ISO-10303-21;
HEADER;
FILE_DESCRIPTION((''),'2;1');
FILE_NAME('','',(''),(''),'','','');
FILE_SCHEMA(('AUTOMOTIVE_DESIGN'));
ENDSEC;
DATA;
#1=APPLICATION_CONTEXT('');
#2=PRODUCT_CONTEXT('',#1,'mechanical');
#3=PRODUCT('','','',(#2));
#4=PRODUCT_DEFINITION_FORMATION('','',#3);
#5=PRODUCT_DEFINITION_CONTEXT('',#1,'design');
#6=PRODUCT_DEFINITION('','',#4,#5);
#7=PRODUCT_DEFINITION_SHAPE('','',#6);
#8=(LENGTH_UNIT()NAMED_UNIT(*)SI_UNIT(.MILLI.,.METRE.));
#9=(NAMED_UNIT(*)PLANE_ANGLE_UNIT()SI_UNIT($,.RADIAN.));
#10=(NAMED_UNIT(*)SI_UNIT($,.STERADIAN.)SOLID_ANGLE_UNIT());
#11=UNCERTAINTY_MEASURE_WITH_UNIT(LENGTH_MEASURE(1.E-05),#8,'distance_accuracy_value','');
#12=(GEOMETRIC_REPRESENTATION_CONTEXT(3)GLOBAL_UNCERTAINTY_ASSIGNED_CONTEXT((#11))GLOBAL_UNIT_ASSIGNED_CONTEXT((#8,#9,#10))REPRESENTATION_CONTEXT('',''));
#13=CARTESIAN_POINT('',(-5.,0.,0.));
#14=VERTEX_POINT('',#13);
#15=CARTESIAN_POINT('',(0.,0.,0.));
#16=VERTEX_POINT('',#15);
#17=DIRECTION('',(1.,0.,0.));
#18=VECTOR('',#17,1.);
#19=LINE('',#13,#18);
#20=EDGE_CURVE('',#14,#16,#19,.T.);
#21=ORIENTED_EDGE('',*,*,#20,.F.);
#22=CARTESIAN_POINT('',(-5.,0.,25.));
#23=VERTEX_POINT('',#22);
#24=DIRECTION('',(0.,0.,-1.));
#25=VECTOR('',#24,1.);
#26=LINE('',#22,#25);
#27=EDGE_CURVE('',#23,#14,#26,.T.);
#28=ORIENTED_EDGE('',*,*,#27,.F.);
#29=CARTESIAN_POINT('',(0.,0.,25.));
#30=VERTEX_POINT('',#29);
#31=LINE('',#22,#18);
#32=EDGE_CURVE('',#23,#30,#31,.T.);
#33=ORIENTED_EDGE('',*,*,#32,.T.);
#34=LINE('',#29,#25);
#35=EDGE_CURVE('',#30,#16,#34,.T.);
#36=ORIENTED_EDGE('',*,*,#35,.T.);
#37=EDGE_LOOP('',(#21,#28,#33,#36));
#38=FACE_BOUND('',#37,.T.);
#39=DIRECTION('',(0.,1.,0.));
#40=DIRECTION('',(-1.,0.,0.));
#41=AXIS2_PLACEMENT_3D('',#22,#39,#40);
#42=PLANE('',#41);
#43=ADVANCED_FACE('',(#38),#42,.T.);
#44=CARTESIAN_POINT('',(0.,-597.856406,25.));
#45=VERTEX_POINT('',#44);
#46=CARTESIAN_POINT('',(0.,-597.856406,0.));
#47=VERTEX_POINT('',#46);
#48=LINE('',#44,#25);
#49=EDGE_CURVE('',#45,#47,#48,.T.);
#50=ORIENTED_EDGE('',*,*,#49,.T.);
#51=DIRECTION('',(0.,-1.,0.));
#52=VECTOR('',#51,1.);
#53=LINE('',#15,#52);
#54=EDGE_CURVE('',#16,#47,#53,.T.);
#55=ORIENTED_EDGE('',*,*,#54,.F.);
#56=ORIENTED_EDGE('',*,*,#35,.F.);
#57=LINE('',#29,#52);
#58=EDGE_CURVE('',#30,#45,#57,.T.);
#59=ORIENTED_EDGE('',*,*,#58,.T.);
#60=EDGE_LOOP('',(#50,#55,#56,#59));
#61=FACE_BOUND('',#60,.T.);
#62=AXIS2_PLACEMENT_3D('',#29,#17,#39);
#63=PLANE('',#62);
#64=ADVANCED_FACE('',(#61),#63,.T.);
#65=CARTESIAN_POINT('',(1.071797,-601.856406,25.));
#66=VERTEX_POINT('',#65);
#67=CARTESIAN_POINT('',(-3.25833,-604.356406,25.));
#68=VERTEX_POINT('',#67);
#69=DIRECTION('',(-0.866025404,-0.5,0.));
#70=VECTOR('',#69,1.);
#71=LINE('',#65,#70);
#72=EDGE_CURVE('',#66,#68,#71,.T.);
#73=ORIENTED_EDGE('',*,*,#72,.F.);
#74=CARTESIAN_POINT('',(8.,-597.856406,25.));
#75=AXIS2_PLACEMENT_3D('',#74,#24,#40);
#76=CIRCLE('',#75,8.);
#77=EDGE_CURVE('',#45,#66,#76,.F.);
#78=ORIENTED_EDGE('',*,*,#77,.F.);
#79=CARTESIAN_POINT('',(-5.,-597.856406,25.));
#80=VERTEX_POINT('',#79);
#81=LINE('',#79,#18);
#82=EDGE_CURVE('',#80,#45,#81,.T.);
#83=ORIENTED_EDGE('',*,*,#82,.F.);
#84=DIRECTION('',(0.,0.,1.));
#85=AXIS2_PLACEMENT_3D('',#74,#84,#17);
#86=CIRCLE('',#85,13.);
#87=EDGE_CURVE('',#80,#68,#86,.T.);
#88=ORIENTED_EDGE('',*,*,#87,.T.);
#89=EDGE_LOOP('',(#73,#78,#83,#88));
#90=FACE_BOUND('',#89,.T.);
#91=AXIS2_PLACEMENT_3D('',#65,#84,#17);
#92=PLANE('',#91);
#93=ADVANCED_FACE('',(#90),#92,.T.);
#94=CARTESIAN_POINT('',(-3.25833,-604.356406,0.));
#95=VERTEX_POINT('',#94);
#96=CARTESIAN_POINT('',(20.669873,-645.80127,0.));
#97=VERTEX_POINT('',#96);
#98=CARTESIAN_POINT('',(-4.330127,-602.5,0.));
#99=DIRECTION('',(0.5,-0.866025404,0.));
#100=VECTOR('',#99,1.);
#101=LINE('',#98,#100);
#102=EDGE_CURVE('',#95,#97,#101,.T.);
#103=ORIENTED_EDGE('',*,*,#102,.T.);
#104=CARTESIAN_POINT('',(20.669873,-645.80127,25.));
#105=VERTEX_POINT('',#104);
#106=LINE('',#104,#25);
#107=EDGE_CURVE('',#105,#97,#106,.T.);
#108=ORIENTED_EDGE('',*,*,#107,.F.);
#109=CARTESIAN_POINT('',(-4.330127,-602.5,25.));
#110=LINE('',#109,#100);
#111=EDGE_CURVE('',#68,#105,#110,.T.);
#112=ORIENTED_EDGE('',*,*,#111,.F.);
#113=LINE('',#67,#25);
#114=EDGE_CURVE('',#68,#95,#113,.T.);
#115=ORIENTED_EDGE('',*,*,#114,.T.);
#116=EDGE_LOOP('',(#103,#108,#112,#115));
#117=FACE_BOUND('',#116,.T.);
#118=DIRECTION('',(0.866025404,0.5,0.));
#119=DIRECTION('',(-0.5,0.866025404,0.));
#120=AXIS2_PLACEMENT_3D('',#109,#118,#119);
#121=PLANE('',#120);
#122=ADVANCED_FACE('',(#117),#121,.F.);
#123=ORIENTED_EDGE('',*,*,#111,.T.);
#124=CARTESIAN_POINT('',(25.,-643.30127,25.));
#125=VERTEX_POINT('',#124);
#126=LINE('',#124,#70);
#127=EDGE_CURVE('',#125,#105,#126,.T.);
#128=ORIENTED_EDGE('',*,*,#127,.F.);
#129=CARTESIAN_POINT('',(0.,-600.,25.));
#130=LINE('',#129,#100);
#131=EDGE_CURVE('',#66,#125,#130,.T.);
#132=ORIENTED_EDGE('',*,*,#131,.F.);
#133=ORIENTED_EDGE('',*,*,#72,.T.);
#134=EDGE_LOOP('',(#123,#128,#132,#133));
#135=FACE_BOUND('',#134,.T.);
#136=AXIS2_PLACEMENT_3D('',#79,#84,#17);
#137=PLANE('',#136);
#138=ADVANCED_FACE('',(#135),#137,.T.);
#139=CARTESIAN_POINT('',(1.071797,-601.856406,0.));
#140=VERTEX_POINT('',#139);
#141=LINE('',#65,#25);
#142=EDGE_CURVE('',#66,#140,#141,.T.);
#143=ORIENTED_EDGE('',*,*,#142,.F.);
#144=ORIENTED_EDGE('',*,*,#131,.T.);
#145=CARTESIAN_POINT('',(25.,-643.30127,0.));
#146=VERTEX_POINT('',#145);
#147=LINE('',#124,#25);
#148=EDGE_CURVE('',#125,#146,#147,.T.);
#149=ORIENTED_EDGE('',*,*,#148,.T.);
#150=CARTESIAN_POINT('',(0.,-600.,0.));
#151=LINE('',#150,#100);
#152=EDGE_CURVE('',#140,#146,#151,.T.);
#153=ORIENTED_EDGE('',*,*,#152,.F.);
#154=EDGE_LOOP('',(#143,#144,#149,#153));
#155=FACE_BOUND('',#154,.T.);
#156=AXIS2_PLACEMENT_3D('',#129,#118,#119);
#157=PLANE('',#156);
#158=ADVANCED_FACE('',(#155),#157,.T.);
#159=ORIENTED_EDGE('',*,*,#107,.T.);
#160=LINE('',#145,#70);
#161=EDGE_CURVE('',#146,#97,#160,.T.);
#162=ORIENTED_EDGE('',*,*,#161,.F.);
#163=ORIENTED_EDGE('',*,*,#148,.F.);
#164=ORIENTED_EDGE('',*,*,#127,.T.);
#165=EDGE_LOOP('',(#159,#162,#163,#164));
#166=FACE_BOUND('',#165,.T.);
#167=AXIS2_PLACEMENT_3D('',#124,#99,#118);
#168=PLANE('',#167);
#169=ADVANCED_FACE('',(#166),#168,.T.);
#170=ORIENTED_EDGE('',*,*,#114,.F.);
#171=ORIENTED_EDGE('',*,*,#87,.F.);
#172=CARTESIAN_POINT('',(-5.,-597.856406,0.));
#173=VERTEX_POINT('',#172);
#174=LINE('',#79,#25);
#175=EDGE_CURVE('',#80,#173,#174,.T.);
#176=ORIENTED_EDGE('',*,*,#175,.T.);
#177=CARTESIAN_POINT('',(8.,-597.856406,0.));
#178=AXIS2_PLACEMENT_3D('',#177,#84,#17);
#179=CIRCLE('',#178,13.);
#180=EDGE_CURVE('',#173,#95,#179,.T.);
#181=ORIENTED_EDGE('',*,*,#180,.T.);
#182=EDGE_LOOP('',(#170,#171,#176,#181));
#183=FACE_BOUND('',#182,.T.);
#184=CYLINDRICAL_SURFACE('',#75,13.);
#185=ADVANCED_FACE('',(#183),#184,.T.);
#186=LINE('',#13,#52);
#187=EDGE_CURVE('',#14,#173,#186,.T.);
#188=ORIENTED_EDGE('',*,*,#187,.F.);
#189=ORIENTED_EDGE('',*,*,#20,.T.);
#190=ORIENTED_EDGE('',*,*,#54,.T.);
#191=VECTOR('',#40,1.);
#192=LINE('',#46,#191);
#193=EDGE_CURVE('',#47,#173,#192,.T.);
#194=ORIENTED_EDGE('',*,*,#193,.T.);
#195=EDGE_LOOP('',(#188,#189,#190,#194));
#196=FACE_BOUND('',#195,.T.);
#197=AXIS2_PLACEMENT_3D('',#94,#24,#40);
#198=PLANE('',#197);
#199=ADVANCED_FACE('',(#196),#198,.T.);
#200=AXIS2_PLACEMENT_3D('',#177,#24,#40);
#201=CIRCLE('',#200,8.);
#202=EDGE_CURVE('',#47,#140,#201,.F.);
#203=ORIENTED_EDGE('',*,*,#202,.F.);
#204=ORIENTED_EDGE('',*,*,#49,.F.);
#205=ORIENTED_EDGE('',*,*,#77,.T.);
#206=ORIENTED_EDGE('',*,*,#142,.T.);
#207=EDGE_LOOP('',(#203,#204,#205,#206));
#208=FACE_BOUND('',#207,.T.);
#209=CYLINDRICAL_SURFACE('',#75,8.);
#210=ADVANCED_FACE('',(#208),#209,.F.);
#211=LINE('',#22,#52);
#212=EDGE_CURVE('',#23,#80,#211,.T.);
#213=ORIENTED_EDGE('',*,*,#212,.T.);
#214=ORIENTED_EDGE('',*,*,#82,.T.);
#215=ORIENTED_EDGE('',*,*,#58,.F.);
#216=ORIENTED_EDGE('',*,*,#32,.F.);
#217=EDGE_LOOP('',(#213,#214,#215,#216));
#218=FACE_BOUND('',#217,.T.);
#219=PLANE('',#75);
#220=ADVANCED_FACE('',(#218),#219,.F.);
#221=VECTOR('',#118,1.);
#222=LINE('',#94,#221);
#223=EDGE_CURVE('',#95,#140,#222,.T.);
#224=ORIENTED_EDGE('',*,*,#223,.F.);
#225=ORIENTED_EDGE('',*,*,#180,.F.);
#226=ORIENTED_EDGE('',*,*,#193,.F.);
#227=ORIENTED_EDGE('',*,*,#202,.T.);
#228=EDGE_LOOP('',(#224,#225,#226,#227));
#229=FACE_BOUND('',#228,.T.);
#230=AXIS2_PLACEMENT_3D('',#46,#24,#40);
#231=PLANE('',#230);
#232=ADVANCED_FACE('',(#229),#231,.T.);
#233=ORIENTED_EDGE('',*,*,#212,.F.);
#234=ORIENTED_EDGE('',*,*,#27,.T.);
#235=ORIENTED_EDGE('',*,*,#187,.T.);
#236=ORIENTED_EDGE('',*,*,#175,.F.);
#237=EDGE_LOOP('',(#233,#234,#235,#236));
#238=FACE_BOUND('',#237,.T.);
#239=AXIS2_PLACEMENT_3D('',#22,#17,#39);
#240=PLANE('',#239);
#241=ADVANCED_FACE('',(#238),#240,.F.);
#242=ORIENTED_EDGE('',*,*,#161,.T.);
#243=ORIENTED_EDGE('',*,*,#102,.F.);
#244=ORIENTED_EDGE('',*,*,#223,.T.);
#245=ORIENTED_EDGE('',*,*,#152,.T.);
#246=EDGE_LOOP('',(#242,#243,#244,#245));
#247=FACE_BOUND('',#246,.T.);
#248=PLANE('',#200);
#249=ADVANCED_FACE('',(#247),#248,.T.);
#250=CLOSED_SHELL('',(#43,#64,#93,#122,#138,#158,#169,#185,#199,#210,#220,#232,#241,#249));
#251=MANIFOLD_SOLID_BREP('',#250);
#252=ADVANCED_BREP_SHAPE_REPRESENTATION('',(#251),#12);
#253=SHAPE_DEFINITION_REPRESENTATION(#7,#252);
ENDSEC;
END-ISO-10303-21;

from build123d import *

# Parameters (mm, degrees)
BASE_FLANGE1_DEPTH = 25


# Sheet-metal steps are written as plain solids
with BuildPart() as part:
    # Sketch1 → Base-Flange1 (new body)
    with BuildSketch(Plane.XY):
        with BuildLine():
            Line((0, 0), (0, -597.856406461))
            ThreePointArc((0, -597.856406461), (0.27259339, -599.926958821), (1.07179677, -601.856406461))
            Line((1.07179677, -601.856406461), (25, -643.301270189))
            Line((25, -643.301270189), (20.669872981, -645.801270189))
            Line((20.669872981, -645.801270189), (-3.258330249, -604.356406461))
            ThreePointArc((-3.258330249, -604.356406461), (-4.557035742, -601.221054047), (-5, -597.856406461))
            Line((-5, -597.856406461), (-5, 0))
            Line((-5, 0), (0, 0))
        make_face()
    extrude(amount=BASE_FLANGE1_DEPTH)


solid = part.part
